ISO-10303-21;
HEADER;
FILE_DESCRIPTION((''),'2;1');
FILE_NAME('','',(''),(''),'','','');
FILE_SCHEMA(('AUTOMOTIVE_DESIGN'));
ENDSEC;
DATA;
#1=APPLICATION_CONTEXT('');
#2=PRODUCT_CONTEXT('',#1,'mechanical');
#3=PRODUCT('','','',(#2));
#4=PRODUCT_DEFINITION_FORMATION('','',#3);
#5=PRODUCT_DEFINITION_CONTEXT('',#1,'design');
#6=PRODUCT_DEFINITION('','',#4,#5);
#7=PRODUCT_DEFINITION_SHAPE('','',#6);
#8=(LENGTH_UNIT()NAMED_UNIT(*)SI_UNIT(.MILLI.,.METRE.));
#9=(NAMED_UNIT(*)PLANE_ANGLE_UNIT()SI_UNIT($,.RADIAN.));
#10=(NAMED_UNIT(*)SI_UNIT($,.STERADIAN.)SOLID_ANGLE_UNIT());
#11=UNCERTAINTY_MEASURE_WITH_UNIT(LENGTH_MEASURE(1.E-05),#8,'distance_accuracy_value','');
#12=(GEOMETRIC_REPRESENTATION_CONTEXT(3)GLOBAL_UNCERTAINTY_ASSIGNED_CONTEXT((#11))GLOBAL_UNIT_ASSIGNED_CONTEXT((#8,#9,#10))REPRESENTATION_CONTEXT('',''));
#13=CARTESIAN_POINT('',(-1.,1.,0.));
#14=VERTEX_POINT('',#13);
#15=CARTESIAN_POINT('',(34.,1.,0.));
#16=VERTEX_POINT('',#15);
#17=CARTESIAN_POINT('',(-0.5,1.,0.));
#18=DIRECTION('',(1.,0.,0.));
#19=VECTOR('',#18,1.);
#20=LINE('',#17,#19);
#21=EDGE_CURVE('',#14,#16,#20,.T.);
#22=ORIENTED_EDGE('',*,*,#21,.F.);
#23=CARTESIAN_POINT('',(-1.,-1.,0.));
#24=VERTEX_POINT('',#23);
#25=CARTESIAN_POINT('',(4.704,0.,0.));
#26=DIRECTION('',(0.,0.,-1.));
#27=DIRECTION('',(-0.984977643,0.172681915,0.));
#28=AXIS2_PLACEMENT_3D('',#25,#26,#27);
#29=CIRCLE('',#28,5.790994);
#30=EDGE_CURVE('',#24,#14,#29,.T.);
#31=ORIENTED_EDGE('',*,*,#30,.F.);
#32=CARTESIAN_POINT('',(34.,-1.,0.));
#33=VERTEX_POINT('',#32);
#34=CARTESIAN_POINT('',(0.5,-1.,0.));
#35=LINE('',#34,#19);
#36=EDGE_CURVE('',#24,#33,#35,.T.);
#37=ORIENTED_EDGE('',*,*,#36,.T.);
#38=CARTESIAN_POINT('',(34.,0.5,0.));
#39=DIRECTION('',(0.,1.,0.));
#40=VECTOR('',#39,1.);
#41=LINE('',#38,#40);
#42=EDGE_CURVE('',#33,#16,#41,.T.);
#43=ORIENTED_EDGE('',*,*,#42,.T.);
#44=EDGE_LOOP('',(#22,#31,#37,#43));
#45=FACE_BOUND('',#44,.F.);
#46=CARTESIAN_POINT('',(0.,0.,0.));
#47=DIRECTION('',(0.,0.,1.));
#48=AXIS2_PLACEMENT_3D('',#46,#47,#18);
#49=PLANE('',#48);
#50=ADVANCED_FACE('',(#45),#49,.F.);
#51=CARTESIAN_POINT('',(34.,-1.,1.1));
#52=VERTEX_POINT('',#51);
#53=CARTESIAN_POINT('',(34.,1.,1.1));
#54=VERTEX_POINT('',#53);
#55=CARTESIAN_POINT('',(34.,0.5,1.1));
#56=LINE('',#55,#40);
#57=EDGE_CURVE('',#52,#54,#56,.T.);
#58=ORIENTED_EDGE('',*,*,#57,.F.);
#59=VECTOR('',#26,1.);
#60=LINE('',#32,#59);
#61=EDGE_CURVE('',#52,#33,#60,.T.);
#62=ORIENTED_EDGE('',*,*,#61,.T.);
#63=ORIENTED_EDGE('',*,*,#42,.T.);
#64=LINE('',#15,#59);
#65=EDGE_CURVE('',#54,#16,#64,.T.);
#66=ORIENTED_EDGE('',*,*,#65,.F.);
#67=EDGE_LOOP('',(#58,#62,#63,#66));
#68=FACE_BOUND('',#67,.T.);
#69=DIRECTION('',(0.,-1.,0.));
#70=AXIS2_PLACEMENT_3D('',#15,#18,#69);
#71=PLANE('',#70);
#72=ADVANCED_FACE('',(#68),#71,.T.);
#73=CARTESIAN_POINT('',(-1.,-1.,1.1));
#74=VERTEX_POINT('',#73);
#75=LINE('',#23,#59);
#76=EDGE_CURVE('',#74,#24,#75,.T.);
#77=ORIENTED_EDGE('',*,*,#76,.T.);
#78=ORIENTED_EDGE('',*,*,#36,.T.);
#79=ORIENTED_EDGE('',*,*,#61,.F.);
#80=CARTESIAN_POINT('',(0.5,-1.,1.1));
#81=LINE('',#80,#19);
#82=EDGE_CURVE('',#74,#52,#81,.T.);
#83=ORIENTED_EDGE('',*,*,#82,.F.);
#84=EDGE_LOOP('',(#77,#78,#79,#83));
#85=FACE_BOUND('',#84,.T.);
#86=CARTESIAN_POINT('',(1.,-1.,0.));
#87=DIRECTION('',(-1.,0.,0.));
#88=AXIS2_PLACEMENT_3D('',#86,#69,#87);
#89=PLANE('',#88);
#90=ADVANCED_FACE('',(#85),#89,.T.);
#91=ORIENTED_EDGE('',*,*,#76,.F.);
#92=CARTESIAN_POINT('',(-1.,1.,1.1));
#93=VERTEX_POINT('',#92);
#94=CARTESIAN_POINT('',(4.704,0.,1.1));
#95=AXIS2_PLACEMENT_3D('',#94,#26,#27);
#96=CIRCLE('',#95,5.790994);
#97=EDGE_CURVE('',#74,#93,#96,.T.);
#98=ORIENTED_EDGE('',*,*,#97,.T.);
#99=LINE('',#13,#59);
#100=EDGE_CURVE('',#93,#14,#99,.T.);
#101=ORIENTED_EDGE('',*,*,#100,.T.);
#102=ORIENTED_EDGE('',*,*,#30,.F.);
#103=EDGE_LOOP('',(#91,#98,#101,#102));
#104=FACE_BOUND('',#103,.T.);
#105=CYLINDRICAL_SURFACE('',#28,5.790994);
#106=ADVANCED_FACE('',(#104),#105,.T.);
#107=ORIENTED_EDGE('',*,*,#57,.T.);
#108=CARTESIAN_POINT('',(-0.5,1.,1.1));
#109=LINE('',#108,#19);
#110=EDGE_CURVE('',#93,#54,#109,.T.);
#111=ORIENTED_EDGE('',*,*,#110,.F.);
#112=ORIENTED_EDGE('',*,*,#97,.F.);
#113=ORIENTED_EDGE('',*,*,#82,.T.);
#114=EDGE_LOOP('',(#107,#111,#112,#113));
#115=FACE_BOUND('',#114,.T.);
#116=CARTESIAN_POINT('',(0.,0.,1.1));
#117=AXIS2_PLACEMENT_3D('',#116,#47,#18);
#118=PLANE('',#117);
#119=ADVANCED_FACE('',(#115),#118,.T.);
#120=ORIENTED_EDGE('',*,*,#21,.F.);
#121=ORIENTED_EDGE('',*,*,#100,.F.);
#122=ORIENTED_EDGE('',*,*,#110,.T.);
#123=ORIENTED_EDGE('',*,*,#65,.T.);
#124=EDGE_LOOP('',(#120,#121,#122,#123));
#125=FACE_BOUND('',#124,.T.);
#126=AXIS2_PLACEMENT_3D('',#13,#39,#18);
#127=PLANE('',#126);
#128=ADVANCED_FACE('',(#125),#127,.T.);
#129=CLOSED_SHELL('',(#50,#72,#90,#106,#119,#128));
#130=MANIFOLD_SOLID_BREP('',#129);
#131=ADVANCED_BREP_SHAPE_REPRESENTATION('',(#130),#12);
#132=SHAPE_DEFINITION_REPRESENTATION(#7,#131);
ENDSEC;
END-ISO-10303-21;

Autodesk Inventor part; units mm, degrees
ref_plane "YZ Plane" through (0, 0, 0) normal (1, 0, 0) x (0, 1, 0)
ref_plane "XZ Plane" through (0, 0, 0) normal (0, 1, 0) x (-1, 0, 0)
ref_plane "XY Plane" through (0, 0, 0) normal (0, 0, 1) x (1, 0, 0)
sketch "Sketch1" plane through (0, 0, 0) normal (0, 0, 1) x (1, 0, 0)
  line L0 (-2.2452, 0) -> (5.8622, 0) projected
  line L1 (-1, 1) -> (1, 1)
  line L2 (1, 1) -> (1, -1)
  line L3 (1, -1) -> (-1, -1)
  line L4 (-1, -1) -> (-1, 1)
  line L5 (-1, 1) -> (1, -1) construction
  line L6 (1, 1) -> (-1, -1) construction
  arc A0 (-1, 1) -> (-1, -1) centre (4.704, 0) ccw
  point P0 (0, 0)
  dimension "d11" = 2
  dimension "d12" = 2
extrude "Extrusion2" add sketch "Sketch1" along normal blind 1.1
move faces "Move1" translate (33, 0, 0) faces at (1, 0.3333, 0.3667)
properties part number "pin_interconnect"
